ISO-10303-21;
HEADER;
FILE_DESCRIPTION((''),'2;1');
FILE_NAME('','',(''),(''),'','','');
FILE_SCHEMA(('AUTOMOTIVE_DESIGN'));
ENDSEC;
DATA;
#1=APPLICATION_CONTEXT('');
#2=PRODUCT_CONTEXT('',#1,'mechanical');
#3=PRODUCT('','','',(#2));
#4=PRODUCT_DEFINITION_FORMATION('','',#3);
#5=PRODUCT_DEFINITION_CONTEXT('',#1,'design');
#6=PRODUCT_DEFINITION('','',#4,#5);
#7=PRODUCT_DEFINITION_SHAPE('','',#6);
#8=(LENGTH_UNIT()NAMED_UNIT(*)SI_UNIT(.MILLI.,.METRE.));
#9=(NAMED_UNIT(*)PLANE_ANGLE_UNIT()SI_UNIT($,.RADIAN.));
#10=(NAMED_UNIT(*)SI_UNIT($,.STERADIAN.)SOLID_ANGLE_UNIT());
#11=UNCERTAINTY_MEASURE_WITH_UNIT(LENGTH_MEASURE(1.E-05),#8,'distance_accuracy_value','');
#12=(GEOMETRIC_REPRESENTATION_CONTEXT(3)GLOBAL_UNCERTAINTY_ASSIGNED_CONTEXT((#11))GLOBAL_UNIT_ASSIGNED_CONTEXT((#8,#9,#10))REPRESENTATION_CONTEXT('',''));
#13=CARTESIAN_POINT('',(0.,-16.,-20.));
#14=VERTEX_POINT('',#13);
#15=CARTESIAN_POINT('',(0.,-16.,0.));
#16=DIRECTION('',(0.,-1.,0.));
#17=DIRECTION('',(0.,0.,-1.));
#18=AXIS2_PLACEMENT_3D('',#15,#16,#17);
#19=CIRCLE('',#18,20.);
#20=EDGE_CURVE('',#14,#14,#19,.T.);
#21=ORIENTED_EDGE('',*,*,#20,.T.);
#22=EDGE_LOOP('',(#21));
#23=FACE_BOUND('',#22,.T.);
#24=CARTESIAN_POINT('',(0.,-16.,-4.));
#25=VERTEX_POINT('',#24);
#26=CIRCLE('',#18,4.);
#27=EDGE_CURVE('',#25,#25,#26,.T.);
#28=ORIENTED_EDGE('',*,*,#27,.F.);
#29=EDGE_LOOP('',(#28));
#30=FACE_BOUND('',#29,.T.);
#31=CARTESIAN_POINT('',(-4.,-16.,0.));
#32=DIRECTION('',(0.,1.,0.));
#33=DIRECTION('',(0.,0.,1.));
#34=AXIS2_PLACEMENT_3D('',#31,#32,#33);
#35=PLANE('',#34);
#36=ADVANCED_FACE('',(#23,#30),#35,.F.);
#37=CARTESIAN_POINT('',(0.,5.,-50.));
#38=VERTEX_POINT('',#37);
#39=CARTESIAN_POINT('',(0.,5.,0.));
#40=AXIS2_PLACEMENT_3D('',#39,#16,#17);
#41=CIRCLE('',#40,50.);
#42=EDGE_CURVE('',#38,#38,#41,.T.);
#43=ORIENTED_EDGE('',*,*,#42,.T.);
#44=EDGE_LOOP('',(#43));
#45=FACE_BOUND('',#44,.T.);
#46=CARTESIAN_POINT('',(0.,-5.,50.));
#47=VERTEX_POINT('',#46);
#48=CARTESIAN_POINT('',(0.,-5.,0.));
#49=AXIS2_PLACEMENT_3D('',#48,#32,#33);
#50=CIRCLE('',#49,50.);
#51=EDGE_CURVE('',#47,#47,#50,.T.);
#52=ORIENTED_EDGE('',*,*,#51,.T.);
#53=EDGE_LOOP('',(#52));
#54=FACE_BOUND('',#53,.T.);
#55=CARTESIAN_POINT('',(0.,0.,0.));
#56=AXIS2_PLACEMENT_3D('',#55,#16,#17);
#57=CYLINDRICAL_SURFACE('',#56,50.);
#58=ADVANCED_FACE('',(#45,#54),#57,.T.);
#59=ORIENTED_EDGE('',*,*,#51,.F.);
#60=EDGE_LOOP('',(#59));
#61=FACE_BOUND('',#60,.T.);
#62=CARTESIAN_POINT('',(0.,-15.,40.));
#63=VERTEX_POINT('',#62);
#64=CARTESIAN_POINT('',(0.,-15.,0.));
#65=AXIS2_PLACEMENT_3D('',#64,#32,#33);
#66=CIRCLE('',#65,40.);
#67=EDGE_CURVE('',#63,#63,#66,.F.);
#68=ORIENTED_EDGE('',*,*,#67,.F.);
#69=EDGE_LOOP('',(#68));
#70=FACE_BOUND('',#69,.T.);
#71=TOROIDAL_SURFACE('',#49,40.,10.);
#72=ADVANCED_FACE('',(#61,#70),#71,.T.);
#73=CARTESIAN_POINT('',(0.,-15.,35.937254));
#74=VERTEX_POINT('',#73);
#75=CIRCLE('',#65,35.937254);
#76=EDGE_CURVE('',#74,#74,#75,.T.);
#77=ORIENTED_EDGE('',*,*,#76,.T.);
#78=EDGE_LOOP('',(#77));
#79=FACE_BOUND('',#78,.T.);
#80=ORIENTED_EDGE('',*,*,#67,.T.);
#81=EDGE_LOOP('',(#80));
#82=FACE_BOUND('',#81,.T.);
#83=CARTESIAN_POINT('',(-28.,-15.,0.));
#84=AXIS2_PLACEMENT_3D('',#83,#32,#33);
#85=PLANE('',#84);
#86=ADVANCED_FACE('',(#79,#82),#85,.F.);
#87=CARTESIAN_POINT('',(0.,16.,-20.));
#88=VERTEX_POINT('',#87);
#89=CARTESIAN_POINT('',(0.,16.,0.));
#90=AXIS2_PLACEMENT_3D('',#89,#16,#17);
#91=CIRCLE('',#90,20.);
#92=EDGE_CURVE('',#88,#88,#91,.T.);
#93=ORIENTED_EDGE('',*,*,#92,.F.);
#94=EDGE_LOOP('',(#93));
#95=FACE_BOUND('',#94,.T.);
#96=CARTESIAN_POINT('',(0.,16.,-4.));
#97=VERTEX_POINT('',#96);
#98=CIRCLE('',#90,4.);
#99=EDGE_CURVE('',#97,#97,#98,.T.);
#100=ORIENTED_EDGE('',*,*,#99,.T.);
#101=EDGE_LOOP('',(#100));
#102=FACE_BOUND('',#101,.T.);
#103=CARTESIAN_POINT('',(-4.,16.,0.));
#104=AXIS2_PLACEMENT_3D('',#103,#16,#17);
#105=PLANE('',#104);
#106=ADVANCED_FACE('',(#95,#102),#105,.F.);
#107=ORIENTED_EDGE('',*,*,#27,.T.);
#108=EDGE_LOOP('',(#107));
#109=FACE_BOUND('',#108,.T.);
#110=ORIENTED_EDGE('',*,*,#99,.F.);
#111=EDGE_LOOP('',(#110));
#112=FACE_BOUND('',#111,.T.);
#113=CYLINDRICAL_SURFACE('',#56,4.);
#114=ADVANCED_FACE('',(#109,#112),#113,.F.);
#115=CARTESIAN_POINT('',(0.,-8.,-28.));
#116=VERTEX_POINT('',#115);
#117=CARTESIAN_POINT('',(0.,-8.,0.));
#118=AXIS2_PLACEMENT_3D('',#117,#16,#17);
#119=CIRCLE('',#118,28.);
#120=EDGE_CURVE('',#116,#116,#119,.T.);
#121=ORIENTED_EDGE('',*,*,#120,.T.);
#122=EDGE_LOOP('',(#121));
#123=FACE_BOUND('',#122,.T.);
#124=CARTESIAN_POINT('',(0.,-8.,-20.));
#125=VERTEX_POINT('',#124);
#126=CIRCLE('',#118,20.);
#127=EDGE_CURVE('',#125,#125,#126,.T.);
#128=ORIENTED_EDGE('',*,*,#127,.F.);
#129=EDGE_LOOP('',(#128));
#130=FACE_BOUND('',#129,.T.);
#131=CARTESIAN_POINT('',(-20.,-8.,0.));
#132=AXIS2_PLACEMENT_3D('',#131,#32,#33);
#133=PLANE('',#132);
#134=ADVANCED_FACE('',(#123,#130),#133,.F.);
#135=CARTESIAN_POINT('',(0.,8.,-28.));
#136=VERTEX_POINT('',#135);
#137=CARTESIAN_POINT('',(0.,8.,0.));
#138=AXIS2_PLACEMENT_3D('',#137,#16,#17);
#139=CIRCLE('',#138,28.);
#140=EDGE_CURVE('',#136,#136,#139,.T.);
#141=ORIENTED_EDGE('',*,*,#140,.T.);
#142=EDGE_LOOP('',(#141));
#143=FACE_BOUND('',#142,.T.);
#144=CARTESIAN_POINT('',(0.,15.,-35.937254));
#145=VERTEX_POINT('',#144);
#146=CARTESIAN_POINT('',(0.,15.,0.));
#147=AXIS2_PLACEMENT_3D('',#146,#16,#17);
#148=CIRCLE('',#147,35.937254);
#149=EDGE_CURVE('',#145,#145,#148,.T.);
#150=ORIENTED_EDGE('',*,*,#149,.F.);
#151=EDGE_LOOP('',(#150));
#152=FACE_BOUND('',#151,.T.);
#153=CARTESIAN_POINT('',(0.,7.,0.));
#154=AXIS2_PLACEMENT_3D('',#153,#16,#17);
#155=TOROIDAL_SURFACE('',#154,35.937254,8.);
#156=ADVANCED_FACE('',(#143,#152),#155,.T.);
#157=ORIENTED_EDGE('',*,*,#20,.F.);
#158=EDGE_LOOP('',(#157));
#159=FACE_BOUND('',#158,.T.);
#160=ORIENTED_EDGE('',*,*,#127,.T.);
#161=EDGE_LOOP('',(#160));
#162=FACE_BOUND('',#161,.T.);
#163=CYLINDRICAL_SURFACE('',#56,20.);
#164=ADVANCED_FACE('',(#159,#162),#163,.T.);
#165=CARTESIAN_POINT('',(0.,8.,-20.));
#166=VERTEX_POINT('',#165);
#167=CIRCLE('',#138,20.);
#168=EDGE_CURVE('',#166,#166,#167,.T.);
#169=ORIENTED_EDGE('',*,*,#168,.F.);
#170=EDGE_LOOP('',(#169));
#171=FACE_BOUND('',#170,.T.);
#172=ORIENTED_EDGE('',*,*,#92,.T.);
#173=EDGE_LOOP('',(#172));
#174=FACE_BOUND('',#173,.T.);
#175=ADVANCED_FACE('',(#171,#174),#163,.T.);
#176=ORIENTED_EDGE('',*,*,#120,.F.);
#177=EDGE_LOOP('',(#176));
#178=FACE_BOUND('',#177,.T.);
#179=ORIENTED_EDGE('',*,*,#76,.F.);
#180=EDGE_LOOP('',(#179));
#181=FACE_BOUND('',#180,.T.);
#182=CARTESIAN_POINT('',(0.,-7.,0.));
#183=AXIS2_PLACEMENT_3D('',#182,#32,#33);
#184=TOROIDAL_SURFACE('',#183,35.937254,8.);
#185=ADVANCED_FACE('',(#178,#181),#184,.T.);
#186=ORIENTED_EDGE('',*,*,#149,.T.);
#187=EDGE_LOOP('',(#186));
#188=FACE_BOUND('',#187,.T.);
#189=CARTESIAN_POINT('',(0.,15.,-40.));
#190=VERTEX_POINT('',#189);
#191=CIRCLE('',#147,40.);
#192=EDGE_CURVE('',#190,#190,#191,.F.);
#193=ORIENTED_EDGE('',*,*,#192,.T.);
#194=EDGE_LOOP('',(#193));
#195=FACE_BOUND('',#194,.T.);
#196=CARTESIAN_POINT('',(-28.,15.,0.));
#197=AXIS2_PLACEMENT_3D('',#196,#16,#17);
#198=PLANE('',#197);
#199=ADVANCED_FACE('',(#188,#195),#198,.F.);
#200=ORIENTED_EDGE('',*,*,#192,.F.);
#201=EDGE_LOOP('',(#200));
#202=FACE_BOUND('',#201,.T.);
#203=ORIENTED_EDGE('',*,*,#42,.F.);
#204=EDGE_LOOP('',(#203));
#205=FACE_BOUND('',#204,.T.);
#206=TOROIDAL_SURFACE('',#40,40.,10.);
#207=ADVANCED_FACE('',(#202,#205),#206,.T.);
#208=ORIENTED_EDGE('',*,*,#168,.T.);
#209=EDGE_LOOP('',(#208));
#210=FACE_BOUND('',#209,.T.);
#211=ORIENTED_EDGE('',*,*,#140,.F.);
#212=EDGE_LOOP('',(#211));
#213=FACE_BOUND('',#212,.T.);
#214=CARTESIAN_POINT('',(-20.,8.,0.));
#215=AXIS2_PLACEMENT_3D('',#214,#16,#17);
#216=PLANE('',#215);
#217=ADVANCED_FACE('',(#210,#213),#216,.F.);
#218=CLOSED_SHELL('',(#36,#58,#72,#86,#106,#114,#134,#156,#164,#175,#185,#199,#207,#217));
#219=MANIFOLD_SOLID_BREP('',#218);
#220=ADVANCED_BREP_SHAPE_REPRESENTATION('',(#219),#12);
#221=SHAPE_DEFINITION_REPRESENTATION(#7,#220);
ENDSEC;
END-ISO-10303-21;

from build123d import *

# Parameters (mm, degrees)
CONG_1_R = 10
CONG_2_R = 8


with BuildPart() as part:
    # Esquisse1 → Révolution1 (revolve)
    with BuildSketch(Plane.XY, mode=Mode.PRIVATE) as r_volution1_sk:
        Polygon((-4, -16), (-4, 16), (-20, 16), (-20, 8), (-28, 8), (-28, 15), (-50, 15), (-50, -15), (-28, -15), (-28, -8), (-20, -8), (-20, -16), align=None)
    revolve(r_volution1_sk.sketch.rotate(Axis((0, 0, 0), (0, 1, 0)), 270), axis=Axis((0, 0, 0), (0, 1, 0)))

    # Congé1
    cong_1_edges = [part.edges().sort_by_distance(p)[0] for p in [
        (0, -15, 50),
        (0, 15, 50),
    ]]
    fillet(cong_1_edges, radius=CONG_1_R)

    # Congé2
    # the kernel refuses this fillet: 8 mm, written as the material it takes off along each edge
    with BuildSketch(Plane(origin=(0, -15, 0), x_dir=(0, 0, -1), z_dir=(1, 0, 0))) as cong_2_piece_1:
        with BuildLine():
            CenterArc((35.937253933, 8), CONG_2_R, 187.180755781, 82.819244219)
            Line((28, 7), (27.841254921, 6.98))
            ThreePointArc((27.841254921, 6.98), (27.84, 3.5), (27.84, 0))
            Line((27.84, 0), (28, -0.16))
            Line((28, -0.16), (35.937253933, -0.16))
            Line((35.937253933, -0.16), (35.937253933, 0))
        make_face()
    revolve(axis=Axis((0, -15, 0), (0, 1, 0)), mode=Mode.SUBTRACT)
    with BuildSketch(Plane(origin=(0, 15, 0), x_dir=(0, 0, -1), z_dir=(1, 0, 0))) as cong_2_piece_2:
        with BuildLine():
            CenterArc((35.937253933, -8), CONG_2_R, 90, 82.819244219)
            Line((28, -7), (27.841254921, -6.98))
            ThreePointArc((27.841254921, -6.98), (27.84, -3.5), (27.84, 0))
            Line((27.84, 0), (28, 0.16))
            Line((28, 0.16), (35.937253933, 0.16))
            Line((35.937253933, 0.16), (35.937253933, 0))
        make_face()
    revolve(axis=Axis((0, 15, 0), (0, 1, 0)), mode=Mode.SUBTRACT)


solid = part.part
